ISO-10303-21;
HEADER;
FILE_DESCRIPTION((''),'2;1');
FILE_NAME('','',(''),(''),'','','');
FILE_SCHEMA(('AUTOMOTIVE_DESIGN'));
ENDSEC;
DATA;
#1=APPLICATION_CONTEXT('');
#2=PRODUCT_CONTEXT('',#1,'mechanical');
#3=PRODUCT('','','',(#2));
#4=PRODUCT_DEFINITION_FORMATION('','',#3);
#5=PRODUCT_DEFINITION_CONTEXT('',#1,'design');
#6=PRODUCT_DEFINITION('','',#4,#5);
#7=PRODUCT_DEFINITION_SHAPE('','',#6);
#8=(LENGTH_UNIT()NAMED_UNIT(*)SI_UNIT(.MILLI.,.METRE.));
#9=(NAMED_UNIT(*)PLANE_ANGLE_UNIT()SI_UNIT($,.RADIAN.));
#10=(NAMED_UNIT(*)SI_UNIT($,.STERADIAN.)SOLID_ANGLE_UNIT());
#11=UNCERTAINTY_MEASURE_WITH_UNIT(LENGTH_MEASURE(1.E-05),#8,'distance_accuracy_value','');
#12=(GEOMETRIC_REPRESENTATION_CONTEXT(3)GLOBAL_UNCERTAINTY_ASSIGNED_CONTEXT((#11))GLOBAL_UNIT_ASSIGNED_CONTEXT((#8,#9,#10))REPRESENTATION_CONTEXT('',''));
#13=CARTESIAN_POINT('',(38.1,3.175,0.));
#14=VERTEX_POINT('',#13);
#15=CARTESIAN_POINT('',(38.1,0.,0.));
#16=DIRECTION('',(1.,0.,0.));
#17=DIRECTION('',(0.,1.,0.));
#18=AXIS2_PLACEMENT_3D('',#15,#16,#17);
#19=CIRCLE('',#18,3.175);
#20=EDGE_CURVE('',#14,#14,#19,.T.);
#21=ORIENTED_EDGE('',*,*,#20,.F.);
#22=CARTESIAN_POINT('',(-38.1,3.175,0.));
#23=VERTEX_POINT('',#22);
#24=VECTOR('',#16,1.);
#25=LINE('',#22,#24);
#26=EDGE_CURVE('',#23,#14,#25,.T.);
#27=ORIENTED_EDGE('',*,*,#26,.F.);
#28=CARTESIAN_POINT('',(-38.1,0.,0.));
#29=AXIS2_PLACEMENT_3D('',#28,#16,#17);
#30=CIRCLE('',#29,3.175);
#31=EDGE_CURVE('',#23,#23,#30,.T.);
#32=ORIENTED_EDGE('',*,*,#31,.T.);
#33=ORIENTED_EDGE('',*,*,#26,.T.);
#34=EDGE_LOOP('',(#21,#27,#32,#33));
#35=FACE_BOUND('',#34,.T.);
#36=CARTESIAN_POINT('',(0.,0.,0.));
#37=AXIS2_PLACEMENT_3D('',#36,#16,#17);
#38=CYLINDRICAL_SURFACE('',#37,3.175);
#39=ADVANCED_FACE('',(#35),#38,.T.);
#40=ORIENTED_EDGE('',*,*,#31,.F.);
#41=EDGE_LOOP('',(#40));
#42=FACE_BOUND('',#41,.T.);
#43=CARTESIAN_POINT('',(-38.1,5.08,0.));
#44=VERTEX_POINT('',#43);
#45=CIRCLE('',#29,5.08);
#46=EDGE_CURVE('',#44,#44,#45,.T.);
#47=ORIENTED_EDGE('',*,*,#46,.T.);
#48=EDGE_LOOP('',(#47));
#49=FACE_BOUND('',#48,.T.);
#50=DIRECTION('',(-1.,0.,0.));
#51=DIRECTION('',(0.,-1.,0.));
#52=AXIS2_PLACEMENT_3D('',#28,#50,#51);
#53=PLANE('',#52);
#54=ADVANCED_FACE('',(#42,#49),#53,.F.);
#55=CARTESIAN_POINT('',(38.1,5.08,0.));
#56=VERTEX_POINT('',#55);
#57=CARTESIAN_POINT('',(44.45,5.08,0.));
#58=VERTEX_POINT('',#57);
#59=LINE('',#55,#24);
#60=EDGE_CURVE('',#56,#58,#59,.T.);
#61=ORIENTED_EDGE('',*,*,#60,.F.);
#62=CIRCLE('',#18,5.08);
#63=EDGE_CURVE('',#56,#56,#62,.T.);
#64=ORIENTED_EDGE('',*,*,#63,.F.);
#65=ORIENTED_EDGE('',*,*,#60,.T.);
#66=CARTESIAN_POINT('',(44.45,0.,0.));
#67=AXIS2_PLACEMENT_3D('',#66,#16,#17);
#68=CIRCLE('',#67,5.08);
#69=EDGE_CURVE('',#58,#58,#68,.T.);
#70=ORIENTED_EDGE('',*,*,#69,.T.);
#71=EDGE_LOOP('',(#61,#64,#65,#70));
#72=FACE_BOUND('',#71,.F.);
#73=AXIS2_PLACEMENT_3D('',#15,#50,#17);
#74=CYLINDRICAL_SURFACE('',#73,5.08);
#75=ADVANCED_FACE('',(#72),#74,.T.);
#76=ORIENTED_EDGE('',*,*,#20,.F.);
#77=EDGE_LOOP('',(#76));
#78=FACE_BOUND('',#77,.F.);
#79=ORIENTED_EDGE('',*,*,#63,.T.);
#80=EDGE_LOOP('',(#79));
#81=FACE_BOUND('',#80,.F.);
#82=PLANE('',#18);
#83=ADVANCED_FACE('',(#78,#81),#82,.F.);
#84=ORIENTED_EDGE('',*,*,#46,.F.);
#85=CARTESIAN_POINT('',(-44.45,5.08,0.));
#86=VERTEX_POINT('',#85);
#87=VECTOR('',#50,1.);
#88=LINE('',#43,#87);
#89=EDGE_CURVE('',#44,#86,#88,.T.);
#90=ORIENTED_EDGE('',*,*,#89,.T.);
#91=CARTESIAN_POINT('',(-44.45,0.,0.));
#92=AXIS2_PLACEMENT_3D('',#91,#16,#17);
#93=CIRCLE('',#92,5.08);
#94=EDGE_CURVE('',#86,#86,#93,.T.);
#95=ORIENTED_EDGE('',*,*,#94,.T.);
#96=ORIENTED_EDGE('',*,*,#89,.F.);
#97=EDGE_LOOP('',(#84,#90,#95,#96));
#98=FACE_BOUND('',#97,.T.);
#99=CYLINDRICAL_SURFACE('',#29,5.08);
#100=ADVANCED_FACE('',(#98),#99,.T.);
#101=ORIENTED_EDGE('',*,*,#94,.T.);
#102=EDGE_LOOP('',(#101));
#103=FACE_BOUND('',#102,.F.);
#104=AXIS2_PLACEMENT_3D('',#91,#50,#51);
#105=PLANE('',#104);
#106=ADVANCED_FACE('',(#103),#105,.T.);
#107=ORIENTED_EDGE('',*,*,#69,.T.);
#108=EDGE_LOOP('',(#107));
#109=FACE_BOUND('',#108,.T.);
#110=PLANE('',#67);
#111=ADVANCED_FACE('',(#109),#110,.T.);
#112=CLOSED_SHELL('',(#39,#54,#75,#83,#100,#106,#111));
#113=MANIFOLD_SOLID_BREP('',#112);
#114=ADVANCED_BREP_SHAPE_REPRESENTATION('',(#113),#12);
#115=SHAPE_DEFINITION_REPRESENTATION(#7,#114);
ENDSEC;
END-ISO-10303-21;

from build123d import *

# Parameters (mm, degrees)
F0_R     = 3.175
F1_DEPTH = 38.1
F2_R     = 5.08
F2_R_2   = 3.175
F3_DEPTH = 6.35


# Not quite as in the source:
# - a pattern or mirror of a feature is missing from the dataset's text; its kind, count and spacing are read off the source's solid


with BuildPart() as f1:
    # F0 (on Right) → F1 (new body, symmetric)
    with BuildSketch(Plane.YZ):
        Circle(F0_R)
    extrude(amount=F1_DEPTH, both=True)

    # F2 (on face) → F3 (join)
    with BuildSketch(Plane.YZ.offset(38.1)):
        Circle(F2_R)
        Circle(F2_R_2, mode=Mode.SUBTRACT)
        Circle(F2_R_2)
    f3 = extrude(amount=F3_DEPTH)

    # F3_copies: F3 across plane
    add(f3.mirror(Plane(origin=(0, 0, 0), x_dir=(0, 0, -1), z_dir=(-1, 0, 0))))


solid = f1.part
